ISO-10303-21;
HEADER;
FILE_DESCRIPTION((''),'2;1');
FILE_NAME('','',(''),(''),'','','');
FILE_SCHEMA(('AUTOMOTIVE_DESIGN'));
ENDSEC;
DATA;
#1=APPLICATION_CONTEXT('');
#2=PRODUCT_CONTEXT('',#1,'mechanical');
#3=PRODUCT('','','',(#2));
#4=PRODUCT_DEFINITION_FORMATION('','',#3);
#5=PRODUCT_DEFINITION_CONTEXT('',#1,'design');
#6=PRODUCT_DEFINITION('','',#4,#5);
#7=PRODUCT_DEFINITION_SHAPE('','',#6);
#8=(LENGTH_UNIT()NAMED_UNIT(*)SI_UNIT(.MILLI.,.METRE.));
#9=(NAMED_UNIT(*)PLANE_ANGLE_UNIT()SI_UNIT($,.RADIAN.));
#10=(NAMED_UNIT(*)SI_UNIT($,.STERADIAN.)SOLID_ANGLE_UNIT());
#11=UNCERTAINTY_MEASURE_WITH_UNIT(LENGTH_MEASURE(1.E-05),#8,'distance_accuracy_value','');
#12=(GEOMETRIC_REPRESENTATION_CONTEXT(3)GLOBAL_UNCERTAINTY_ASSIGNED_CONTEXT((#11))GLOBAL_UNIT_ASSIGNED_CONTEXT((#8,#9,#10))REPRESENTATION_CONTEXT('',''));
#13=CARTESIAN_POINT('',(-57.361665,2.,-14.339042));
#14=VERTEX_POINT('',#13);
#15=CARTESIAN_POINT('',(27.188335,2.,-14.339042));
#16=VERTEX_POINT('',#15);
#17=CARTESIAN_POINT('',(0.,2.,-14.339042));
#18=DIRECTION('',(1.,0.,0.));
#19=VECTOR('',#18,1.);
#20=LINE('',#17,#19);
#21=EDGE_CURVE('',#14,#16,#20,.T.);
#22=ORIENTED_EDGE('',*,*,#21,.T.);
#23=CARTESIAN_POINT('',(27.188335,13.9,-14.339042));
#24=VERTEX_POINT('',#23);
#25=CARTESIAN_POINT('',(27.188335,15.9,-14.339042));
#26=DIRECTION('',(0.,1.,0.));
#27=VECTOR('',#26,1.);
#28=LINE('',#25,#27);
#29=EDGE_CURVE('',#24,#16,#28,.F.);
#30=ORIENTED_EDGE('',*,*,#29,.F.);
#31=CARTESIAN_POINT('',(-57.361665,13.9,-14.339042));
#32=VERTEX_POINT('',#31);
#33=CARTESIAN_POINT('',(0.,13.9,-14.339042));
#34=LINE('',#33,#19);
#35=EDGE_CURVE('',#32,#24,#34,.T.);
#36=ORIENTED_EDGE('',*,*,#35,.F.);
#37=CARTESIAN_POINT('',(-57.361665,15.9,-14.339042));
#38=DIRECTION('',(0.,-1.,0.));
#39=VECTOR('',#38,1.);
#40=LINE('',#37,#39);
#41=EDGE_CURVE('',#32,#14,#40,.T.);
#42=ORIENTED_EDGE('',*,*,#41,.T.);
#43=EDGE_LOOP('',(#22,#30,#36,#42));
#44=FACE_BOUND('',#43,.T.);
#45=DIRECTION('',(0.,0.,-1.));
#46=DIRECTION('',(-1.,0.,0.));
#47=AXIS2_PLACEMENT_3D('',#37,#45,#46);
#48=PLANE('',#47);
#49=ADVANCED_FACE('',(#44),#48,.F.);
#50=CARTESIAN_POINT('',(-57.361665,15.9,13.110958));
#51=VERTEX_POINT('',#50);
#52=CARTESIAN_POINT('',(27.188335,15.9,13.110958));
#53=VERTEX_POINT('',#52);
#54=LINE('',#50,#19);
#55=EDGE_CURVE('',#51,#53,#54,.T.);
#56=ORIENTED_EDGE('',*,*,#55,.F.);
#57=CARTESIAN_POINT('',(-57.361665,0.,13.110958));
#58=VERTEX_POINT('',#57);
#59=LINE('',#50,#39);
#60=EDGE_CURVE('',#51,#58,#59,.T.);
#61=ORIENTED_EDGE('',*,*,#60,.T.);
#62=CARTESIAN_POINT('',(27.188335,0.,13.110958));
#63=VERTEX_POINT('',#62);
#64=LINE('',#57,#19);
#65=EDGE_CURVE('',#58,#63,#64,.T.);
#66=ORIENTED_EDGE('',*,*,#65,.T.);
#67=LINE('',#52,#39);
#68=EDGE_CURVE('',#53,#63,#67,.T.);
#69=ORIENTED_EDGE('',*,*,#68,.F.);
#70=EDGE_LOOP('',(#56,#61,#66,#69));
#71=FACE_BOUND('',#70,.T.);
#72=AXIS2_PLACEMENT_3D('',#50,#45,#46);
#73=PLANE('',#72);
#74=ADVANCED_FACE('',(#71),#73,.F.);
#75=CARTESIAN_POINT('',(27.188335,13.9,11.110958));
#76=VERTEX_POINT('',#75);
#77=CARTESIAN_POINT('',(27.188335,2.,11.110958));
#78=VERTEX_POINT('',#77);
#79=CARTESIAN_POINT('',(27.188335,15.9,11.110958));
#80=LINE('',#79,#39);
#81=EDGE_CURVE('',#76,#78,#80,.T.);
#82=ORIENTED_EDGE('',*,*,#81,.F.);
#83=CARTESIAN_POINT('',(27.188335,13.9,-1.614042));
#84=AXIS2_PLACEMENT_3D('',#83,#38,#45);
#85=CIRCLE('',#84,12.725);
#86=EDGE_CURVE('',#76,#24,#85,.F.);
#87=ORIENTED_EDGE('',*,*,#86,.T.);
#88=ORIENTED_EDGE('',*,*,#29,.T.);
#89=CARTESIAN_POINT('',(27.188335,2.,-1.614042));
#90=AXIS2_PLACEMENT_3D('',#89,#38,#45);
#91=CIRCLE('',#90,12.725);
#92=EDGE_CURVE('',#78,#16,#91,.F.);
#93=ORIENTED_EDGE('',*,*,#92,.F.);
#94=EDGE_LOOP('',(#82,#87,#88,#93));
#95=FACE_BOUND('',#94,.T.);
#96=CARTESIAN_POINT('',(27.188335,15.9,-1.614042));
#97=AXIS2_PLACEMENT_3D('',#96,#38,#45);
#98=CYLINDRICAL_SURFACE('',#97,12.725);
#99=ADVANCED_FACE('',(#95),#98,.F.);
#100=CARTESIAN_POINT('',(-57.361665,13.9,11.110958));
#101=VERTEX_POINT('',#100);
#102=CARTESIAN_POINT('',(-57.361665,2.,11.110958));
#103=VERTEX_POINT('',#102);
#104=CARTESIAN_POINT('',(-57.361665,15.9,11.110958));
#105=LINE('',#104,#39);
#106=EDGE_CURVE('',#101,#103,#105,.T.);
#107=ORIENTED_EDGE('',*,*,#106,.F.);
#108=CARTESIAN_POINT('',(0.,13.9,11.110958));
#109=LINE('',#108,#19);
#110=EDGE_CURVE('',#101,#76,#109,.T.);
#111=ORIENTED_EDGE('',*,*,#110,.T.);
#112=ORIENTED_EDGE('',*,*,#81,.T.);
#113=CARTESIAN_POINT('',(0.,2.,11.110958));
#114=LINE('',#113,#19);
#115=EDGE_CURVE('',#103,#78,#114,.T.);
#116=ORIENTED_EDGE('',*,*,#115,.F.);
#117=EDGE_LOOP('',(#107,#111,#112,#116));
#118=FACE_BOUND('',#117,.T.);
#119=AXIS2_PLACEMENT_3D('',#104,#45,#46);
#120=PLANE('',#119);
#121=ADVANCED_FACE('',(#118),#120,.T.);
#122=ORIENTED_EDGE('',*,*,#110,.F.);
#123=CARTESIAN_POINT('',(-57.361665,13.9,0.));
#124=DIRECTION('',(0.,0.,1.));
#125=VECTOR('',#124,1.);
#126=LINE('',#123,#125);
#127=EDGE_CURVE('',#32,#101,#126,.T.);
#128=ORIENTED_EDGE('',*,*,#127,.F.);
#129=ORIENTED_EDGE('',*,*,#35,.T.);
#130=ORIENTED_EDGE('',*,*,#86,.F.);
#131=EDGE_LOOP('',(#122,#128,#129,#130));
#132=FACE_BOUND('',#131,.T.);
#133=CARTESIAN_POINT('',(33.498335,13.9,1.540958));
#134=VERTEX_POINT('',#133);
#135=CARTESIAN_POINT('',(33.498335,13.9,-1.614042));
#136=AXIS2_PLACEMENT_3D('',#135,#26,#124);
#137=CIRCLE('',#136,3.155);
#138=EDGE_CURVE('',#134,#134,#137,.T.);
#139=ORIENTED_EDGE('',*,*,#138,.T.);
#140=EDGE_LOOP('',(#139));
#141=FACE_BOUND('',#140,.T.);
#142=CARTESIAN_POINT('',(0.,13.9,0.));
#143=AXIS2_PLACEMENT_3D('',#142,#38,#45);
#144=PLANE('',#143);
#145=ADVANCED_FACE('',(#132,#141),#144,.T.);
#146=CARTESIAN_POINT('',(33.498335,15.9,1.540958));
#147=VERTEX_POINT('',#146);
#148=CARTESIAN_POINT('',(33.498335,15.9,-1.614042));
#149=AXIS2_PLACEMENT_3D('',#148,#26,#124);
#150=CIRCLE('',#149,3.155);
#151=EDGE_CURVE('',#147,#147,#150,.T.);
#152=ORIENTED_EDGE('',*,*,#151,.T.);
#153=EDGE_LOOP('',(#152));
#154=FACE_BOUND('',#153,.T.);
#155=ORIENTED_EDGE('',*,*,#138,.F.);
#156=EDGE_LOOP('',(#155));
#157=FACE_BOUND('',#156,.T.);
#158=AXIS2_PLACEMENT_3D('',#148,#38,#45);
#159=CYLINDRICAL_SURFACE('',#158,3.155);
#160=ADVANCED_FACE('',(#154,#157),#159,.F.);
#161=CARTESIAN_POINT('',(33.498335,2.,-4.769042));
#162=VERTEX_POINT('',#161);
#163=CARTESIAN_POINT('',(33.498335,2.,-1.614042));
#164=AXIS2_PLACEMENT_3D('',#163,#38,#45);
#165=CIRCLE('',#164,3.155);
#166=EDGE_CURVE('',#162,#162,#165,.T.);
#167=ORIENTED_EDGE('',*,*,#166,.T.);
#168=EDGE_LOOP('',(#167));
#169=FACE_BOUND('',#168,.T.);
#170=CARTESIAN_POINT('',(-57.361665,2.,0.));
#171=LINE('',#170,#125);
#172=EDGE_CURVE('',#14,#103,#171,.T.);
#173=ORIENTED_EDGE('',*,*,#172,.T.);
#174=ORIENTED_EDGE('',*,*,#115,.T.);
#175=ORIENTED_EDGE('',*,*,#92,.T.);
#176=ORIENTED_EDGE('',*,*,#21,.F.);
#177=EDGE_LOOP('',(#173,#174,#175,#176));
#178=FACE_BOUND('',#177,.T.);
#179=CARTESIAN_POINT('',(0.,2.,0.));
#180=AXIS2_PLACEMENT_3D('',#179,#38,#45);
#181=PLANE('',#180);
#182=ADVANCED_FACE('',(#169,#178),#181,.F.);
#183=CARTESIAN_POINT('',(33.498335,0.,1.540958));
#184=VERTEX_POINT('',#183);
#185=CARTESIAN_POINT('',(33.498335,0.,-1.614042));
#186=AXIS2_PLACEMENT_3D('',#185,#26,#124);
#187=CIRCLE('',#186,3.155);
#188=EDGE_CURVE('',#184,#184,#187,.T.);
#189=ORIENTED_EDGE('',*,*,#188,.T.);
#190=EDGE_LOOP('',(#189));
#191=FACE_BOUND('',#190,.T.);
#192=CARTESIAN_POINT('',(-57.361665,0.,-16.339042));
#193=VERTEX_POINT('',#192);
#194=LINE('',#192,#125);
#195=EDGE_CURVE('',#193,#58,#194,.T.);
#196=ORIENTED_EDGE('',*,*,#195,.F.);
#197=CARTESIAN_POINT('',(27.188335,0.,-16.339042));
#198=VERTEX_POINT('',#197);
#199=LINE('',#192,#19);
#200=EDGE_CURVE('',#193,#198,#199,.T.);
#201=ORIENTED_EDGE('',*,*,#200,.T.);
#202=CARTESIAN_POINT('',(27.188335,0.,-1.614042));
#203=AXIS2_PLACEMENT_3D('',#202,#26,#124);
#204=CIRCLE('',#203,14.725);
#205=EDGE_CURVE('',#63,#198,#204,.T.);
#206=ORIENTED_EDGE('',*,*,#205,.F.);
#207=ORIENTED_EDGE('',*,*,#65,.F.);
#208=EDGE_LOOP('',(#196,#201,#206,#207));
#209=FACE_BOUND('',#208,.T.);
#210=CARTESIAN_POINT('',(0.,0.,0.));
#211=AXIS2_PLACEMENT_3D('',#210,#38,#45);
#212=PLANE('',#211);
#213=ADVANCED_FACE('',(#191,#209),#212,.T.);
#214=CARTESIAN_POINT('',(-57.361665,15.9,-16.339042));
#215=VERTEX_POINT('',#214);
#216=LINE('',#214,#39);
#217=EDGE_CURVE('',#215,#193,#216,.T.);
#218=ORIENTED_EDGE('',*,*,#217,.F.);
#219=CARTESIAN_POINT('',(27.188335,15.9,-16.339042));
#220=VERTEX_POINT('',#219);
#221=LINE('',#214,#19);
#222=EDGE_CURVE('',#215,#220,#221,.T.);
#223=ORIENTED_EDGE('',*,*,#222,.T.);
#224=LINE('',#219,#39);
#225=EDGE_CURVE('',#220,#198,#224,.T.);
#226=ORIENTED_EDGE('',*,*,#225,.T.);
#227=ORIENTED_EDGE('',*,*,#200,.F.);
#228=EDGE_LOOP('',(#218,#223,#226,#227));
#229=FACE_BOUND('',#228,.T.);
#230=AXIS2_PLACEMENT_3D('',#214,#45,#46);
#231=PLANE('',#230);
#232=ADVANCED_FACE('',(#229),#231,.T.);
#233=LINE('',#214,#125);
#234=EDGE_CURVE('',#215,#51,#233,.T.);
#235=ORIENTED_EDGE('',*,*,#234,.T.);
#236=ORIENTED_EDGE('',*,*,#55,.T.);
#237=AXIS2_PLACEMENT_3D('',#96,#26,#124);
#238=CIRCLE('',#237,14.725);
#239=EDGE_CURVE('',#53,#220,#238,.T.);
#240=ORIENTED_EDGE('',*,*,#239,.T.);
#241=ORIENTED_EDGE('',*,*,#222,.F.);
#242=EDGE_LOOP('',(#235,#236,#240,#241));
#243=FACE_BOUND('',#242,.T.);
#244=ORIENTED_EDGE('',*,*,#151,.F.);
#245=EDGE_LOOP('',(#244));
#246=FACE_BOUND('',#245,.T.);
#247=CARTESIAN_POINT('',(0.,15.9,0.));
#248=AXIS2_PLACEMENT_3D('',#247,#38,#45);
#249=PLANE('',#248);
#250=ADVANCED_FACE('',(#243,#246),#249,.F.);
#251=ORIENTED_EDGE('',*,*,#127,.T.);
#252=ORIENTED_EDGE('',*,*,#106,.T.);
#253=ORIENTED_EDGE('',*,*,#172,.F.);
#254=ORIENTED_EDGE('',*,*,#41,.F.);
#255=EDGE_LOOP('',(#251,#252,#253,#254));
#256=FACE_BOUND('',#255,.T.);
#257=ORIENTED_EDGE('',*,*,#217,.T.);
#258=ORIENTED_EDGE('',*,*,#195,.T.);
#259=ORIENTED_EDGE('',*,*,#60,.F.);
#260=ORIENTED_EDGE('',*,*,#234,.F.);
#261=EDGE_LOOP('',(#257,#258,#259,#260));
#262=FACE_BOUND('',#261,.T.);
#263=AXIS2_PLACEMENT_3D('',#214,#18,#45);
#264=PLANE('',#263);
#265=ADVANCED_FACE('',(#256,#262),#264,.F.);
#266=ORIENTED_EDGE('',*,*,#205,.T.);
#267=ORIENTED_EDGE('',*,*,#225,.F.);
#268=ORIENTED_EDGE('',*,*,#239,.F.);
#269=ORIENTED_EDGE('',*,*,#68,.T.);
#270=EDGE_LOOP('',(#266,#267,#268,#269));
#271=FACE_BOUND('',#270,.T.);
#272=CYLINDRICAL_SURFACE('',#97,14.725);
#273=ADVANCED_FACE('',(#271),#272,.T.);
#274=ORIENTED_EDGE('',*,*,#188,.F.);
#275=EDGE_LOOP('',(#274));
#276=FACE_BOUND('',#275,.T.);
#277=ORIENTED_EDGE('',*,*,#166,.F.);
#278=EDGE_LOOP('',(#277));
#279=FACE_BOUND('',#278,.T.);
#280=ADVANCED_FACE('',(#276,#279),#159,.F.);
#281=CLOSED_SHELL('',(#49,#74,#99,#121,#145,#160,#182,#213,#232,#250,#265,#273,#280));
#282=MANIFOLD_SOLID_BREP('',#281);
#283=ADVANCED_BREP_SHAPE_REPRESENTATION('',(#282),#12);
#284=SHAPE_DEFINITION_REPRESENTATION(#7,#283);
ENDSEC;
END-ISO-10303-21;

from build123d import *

# Parameters (mm, degrees)
SKETCH1_R                = 3.155
BOSS_EXTRUDE7_DEPTH      = 15.9
SHELL1_T                 = -2
CUT_EXTRUDE5_START       = 2
CUT_EXTRUDE5_OUTLINE_R   = 5.155
CUT_EXTRUDE5_OUTLINE_R_2 = 3.155
CUT_EXTRUDE5_DEPTH       = 11.9


# Read off the part's stored shape, not the designer's step: Cut-Extrude5
with BuildPart() as part:
    # Sketch1 → Boss-Extrude7 (new body)
    with BuildSketch(Plane(origin=(0, 0, 0), x_dir=(1, 0, 0), z_dir=(0, 1, 0))):
        with BuildLine():
            Line((-57.361665301, -13.110958237), (27.188334699, -13.110958237))
            ThreePointArc((27.188334699, -13.110958237), (41.913334699, 1.614041763), (27.188334699, 16.339041763))
            Line((27.188334699, 16.339041763), (-57.361665301, 16.339041763))
            Line((-57.361665301, 16.339041763), (-57.361665301, -13.110958237))
        make_face()
        with Locations(Location((33.498334699, 1.614041763, 0), (0, 0, 270))):
            Circle(SKETCH1_R, mode=Mode.SUBTRACT)
    extrude(amount=BOSS_EXTRUDE7_DEPTH)

    # Shell1
    shell1_openings = [part.faces().sort_by_distance(p)[0] for p in [
        (-57.361665301, 7.95, -1.614041763),
    ]]
    offset(amount=SHELL1_T, openings=shell1_openings, kind=Kind.INTERSECTION)

    # Cut-Extrude5 outline → Cut-Extrude5 (cut)
    with BuildSketch(Plane(origin=(0, 0, 0), x_dir=(1, 0, 0), z_dir=(0, 1, 0)).offset(CUT_EXTRUDE5_START)):
        with Locations((33.498334699, 1.614041763)):
            Circle(CUT_EXTRUDE5_OUTLINE_R)
        with Locations((33.498334699, 1.614041763)):
            Circle(CUT_EXTRUDE5_OUTLINE_R_2, mode=Mode.SUBTRACT)
    extrude(amount=CUT_EXTRUDE5_DEPTH, mode=Mode.SUBTRACT)


solid = part.part
